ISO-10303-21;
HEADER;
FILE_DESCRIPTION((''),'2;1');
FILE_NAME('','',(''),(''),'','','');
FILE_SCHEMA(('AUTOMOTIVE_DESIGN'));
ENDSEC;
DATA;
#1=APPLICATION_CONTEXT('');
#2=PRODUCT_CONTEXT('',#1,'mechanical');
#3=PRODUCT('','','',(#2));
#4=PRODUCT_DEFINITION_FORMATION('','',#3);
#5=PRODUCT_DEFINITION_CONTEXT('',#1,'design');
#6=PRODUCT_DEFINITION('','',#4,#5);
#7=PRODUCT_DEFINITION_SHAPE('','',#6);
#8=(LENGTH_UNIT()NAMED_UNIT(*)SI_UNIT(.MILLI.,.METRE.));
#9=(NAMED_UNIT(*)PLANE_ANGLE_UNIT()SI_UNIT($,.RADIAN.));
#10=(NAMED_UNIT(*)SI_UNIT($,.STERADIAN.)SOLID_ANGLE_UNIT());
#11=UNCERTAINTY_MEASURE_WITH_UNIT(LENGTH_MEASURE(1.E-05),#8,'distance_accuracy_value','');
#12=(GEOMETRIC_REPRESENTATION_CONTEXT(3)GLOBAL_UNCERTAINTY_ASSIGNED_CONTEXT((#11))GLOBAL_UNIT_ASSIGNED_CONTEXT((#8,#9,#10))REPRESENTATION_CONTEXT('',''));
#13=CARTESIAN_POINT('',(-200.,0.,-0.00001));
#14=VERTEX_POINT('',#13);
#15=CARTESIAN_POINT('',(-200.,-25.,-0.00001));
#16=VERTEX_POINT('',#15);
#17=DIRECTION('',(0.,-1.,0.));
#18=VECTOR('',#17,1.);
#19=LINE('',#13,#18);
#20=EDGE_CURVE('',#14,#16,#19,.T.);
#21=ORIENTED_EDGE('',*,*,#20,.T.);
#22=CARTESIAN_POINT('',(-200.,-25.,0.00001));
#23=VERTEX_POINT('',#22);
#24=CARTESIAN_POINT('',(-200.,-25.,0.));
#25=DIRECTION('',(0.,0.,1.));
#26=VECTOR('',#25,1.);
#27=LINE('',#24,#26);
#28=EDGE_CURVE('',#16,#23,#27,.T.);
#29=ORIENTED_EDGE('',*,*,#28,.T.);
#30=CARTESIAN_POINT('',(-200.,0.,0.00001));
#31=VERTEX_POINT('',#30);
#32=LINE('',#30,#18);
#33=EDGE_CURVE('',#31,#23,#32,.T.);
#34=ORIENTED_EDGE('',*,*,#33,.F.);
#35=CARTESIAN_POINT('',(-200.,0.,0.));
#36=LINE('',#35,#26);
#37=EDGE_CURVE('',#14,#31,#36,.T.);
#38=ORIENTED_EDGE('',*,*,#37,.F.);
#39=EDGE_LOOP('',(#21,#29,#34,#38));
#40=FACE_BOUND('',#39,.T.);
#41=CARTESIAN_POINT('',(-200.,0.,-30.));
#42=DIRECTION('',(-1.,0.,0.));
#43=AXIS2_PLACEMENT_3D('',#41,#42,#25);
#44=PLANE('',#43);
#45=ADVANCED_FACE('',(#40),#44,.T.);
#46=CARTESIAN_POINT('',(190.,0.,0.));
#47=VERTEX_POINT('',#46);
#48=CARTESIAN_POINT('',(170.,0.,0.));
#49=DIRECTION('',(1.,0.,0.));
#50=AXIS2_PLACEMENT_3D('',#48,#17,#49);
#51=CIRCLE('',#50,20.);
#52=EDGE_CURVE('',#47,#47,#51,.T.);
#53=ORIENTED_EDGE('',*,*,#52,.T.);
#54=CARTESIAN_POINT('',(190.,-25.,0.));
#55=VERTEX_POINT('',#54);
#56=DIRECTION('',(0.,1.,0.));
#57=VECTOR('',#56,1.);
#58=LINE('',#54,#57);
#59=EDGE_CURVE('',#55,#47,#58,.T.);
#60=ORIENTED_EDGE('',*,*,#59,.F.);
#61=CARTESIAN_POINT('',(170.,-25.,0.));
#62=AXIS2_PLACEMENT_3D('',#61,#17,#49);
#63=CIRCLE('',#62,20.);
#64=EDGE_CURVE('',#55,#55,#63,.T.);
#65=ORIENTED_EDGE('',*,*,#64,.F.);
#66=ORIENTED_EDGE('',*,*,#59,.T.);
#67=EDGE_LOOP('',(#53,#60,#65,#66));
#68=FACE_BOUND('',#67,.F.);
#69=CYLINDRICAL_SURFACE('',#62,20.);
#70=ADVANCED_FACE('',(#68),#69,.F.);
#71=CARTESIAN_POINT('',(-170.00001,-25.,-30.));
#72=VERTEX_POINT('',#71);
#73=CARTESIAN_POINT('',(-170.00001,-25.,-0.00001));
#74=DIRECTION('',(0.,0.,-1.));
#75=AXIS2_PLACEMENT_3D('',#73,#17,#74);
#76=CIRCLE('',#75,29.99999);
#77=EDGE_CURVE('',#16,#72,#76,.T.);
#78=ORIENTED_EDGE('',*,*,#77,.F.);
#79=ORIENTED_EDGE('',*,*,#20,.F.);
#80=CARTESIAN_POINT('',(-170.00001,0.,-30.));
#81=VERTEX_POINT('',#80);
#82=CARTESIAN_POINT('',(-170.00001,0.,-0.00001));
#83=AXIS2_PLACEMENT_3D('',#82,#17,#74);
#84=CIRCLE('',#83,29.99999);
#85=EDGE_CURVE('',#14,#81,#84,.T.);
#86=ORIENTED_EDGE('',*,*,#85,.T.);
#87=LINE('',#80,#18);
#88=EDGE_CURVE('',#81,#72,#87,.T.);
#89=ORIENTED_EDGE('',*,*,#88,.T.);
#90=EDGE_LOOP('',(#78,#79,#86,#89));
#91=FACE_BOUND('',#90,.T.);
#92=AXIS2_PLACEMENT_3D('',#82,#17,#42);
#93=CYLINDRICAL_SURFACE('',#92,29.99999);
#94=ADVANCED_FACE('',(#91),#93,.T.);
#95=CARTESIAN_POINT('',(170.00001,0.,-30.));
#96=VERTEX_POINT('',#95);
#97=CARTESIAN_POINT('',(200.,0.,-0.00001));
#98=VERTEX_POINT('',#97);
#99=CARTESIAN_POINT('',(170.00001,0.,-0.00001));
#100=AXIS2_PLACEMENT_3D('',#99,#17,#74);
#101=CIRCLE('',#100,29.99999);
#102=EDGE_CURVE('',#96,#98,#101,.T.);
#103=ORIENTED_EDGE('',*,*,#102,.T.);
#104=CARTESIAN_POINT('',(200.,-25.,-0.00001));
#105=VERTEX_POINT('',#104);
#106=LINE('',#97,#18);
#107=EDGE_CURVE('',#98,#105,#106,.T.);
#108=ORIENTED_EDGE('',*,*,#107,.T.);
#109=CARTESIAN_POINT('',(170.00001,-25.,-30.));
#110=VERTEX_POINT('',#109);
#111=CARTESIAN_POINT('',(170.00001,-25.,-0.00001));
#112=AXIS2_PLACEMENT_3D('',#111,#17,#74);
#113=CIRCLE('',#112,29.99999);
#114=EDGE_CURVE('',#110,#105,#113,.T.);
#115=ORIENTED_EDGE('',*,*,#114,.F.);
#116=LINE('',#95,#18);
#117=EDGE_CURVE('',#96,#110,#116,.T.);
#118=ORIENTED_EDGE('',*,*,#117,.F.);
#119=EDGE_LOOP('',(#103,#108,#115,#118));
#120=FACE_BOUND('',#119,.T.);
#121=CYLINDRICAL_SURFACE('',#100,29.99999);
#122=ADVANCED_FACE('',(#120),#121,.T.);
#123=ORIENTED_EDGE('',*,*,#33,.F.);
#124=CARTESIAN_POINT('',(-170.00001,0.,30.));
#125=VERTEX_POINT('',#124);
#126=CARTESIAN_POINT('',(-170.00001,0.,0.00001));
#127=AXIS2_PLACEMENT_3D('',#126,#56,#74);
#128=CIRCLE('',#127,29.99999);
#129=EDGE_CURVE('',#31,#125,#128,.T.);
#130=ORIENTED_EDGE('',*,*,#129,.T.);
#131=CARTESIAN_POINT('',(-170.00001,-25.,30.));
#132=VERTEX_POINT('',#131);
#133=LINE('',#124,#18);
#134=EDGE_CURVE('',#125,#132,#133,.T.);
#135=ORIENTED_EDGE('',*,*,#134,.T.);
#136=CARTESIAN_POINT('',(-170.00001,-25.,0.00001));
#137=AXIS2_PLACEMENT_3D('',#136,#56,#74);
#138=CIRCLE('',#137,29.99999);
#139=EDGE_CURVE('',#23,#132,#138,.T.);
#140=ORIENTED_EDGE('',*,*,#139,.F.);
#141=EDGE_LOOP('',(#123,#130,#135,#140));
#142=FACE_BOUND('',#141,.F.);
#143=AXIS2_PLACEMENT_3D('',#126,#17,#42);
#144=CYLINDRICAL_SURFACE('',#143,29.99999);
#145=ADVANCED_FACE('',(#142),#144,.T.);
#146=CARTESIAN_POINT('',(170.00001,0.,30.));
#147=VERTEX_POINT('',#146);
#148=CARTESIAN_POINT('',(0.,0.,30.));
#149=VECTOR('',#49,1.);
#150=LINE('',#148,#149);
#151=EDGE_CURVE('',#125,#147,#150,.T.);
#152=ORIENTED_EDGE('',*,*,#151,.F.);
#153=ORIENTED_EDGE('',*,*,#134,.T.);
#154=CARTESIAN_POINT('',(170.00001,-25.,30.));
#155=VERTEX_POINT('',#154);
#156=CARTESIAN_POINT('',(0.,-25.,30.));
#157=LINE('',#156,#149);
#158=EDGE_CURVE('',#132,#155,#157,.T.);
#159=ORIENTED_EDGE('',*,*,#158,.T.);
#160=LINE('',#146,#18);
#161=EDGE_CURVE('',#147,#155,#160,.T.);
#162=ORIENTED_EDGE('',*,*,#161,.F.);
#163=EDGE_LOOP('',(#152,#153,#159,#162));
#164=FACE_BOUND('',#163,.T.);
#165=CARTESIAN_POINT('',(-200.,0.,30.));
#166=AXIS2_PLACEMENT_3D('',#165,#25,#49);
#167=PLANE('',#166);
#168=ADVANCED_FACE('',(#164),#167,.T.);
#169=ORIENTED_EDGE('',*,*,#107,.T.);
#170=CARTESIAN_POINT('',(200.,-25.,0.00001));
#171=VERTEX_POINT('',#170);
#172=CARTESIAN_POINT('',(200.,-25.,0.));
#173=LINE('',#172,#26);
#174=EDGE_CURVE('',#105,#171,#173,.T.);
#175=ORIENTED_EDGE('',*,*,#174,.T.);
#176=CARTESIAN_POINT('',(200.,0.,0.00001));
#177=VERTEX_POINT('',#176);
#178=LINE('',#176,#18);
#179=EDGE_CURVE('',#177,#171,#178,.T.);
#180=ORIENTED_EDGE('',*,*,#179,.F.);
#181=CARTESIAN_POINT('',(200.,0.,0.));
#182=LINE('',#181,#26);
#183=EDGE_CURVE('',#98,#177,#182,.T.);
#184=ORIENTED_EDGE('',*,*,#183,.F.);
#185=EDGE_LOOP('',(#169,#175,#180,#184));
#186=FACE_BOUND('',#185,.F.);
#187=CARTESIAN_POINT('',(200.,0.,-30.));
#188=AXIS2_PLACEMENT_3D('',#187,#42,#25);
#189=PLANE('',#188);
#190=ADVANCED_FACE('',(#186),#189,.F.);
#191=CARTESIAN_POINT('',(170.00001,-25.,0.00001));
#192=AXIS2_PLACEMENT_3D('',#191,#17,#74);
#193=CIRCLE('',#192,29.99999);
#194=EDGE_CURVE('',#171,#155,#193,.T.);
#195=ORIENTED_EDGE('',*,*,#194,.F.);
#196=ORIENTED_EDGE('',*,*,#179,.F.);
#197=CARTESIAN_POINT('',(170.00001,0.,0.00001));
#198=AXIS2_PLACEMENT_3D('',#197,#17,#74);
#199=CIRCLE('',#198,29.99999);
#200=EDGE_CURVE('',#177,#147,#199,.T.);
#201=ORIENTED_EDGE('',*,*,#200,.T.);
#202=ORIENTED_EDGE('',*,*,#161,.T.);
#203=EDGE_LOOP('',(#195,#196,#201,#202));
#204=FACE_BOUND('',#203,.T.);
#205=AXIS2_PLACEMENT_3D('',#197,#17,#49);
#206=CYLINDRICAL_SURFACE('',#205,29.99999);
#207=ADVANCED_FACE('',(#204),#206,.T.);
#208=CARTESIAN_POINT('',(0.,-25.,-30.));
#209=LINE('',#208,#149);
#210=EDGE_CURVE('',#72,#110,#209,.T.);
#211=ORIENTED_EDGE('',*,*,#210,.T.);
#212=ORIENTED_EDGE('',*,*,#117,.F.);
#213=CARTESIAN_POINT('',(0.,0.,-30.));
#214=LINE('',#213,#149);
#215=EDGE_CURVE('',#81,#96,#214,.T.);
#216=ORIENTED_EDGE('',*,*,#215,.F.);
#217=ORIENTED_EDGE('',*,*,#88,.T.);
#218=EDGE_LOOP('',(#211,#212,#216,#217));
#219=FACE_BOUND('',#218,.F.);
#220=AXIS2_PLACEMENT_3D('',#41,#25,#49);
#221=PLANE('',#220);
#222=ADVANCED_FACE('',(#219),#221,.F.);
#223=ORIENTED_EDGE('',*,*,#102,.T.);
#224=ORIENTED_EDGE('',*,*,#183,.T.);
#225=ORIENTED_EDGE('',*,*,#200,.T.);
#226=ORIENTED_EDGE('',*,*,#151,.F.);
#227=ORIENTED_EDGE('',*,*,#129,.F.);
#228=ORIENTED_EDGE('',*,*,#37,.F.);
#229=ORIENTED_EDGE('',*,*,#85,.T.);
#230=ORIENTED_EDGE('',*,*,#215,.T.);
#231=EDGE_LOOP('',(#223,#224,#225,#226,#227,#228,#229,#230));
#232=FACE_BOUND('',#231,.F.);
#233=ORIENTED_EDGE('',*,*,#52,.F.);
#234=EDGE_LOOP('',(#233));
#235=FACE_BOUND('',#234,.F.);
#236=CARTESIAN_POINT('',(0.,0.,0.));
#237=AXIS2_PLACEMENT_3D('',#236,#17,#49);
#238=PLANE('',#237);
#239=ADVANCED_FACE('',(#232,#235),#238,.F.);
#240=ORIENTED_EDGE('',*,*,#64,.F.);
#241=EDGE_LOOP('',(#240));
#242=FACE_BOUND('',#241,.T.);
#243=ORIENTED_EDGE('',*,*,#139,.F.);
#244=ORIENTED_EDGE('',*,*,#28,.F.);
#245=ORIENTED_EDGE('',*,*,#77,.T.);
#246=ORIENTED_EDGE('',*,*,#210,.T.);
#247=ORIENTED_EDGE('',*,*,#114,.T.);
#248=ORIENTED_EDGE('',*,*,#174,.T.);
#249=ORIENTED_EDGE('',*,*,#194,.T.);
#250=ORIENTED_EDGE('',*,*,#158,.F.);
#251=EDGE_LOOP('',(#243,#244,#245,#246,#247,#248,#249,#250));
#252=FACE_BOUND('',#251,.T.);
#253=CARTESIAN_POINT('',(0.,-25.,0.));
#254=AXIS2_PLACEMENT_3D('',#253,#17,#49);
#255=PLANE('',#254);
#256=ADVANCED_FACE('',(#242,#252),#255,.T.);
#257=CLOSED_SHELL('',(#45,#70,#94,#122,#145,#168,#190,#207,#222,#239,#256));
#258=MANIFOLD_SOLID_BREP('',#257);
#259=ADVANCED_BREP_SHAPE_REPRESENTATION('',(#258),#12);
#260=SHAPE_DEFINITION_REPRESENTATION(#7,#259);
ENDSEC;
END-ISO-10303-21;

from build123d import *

# Parameters (mm, degrees)
F0_W     = 400
F0_H     = 60
F1_DEPTH = 25
F2_R     = 29.99999
F4_DEPTH = 25


# Not quite as in the source:
# - a fillet or chamfer is up to 0.001 mm smaller than in the source, because OpenCascade refuses the exact size


with BuildPart() as f1:
    # F0 (on Front) → F1 (new body)
    with BuildSketch(Plane.XZ):
        Rectangle(F0_W, F0_H)
    extrude(amount=F1_DEPTH)

    # F2 (radius 30 in the source; OpenCascade refuses exactly that, so slightly less here)
    f2_edges = [f1.edges().sort_by_distance(p)[0] for p in [
        (-200, -12.5, 30),
        (-200, -12.5, -30),
        (200, -12.5, 30),
        (200, -12.5, -30),
    ]]
    fillet(f2_edges, radius=F2_R)

    # F3 (on face) → F4 (cut)
    with BuildSketch(Plane.XZ.offset(25)):
        with BuildLine():
            ThreePointArc((150, 0), (170, -20), (190, 0))
            ThreePointArc((190, 0), (170, 20), (150, 0))
        make_face()
    extrude(amount=-F4_DEPTH, mode=Mode.SUBTRACT)


solid = f1.part
